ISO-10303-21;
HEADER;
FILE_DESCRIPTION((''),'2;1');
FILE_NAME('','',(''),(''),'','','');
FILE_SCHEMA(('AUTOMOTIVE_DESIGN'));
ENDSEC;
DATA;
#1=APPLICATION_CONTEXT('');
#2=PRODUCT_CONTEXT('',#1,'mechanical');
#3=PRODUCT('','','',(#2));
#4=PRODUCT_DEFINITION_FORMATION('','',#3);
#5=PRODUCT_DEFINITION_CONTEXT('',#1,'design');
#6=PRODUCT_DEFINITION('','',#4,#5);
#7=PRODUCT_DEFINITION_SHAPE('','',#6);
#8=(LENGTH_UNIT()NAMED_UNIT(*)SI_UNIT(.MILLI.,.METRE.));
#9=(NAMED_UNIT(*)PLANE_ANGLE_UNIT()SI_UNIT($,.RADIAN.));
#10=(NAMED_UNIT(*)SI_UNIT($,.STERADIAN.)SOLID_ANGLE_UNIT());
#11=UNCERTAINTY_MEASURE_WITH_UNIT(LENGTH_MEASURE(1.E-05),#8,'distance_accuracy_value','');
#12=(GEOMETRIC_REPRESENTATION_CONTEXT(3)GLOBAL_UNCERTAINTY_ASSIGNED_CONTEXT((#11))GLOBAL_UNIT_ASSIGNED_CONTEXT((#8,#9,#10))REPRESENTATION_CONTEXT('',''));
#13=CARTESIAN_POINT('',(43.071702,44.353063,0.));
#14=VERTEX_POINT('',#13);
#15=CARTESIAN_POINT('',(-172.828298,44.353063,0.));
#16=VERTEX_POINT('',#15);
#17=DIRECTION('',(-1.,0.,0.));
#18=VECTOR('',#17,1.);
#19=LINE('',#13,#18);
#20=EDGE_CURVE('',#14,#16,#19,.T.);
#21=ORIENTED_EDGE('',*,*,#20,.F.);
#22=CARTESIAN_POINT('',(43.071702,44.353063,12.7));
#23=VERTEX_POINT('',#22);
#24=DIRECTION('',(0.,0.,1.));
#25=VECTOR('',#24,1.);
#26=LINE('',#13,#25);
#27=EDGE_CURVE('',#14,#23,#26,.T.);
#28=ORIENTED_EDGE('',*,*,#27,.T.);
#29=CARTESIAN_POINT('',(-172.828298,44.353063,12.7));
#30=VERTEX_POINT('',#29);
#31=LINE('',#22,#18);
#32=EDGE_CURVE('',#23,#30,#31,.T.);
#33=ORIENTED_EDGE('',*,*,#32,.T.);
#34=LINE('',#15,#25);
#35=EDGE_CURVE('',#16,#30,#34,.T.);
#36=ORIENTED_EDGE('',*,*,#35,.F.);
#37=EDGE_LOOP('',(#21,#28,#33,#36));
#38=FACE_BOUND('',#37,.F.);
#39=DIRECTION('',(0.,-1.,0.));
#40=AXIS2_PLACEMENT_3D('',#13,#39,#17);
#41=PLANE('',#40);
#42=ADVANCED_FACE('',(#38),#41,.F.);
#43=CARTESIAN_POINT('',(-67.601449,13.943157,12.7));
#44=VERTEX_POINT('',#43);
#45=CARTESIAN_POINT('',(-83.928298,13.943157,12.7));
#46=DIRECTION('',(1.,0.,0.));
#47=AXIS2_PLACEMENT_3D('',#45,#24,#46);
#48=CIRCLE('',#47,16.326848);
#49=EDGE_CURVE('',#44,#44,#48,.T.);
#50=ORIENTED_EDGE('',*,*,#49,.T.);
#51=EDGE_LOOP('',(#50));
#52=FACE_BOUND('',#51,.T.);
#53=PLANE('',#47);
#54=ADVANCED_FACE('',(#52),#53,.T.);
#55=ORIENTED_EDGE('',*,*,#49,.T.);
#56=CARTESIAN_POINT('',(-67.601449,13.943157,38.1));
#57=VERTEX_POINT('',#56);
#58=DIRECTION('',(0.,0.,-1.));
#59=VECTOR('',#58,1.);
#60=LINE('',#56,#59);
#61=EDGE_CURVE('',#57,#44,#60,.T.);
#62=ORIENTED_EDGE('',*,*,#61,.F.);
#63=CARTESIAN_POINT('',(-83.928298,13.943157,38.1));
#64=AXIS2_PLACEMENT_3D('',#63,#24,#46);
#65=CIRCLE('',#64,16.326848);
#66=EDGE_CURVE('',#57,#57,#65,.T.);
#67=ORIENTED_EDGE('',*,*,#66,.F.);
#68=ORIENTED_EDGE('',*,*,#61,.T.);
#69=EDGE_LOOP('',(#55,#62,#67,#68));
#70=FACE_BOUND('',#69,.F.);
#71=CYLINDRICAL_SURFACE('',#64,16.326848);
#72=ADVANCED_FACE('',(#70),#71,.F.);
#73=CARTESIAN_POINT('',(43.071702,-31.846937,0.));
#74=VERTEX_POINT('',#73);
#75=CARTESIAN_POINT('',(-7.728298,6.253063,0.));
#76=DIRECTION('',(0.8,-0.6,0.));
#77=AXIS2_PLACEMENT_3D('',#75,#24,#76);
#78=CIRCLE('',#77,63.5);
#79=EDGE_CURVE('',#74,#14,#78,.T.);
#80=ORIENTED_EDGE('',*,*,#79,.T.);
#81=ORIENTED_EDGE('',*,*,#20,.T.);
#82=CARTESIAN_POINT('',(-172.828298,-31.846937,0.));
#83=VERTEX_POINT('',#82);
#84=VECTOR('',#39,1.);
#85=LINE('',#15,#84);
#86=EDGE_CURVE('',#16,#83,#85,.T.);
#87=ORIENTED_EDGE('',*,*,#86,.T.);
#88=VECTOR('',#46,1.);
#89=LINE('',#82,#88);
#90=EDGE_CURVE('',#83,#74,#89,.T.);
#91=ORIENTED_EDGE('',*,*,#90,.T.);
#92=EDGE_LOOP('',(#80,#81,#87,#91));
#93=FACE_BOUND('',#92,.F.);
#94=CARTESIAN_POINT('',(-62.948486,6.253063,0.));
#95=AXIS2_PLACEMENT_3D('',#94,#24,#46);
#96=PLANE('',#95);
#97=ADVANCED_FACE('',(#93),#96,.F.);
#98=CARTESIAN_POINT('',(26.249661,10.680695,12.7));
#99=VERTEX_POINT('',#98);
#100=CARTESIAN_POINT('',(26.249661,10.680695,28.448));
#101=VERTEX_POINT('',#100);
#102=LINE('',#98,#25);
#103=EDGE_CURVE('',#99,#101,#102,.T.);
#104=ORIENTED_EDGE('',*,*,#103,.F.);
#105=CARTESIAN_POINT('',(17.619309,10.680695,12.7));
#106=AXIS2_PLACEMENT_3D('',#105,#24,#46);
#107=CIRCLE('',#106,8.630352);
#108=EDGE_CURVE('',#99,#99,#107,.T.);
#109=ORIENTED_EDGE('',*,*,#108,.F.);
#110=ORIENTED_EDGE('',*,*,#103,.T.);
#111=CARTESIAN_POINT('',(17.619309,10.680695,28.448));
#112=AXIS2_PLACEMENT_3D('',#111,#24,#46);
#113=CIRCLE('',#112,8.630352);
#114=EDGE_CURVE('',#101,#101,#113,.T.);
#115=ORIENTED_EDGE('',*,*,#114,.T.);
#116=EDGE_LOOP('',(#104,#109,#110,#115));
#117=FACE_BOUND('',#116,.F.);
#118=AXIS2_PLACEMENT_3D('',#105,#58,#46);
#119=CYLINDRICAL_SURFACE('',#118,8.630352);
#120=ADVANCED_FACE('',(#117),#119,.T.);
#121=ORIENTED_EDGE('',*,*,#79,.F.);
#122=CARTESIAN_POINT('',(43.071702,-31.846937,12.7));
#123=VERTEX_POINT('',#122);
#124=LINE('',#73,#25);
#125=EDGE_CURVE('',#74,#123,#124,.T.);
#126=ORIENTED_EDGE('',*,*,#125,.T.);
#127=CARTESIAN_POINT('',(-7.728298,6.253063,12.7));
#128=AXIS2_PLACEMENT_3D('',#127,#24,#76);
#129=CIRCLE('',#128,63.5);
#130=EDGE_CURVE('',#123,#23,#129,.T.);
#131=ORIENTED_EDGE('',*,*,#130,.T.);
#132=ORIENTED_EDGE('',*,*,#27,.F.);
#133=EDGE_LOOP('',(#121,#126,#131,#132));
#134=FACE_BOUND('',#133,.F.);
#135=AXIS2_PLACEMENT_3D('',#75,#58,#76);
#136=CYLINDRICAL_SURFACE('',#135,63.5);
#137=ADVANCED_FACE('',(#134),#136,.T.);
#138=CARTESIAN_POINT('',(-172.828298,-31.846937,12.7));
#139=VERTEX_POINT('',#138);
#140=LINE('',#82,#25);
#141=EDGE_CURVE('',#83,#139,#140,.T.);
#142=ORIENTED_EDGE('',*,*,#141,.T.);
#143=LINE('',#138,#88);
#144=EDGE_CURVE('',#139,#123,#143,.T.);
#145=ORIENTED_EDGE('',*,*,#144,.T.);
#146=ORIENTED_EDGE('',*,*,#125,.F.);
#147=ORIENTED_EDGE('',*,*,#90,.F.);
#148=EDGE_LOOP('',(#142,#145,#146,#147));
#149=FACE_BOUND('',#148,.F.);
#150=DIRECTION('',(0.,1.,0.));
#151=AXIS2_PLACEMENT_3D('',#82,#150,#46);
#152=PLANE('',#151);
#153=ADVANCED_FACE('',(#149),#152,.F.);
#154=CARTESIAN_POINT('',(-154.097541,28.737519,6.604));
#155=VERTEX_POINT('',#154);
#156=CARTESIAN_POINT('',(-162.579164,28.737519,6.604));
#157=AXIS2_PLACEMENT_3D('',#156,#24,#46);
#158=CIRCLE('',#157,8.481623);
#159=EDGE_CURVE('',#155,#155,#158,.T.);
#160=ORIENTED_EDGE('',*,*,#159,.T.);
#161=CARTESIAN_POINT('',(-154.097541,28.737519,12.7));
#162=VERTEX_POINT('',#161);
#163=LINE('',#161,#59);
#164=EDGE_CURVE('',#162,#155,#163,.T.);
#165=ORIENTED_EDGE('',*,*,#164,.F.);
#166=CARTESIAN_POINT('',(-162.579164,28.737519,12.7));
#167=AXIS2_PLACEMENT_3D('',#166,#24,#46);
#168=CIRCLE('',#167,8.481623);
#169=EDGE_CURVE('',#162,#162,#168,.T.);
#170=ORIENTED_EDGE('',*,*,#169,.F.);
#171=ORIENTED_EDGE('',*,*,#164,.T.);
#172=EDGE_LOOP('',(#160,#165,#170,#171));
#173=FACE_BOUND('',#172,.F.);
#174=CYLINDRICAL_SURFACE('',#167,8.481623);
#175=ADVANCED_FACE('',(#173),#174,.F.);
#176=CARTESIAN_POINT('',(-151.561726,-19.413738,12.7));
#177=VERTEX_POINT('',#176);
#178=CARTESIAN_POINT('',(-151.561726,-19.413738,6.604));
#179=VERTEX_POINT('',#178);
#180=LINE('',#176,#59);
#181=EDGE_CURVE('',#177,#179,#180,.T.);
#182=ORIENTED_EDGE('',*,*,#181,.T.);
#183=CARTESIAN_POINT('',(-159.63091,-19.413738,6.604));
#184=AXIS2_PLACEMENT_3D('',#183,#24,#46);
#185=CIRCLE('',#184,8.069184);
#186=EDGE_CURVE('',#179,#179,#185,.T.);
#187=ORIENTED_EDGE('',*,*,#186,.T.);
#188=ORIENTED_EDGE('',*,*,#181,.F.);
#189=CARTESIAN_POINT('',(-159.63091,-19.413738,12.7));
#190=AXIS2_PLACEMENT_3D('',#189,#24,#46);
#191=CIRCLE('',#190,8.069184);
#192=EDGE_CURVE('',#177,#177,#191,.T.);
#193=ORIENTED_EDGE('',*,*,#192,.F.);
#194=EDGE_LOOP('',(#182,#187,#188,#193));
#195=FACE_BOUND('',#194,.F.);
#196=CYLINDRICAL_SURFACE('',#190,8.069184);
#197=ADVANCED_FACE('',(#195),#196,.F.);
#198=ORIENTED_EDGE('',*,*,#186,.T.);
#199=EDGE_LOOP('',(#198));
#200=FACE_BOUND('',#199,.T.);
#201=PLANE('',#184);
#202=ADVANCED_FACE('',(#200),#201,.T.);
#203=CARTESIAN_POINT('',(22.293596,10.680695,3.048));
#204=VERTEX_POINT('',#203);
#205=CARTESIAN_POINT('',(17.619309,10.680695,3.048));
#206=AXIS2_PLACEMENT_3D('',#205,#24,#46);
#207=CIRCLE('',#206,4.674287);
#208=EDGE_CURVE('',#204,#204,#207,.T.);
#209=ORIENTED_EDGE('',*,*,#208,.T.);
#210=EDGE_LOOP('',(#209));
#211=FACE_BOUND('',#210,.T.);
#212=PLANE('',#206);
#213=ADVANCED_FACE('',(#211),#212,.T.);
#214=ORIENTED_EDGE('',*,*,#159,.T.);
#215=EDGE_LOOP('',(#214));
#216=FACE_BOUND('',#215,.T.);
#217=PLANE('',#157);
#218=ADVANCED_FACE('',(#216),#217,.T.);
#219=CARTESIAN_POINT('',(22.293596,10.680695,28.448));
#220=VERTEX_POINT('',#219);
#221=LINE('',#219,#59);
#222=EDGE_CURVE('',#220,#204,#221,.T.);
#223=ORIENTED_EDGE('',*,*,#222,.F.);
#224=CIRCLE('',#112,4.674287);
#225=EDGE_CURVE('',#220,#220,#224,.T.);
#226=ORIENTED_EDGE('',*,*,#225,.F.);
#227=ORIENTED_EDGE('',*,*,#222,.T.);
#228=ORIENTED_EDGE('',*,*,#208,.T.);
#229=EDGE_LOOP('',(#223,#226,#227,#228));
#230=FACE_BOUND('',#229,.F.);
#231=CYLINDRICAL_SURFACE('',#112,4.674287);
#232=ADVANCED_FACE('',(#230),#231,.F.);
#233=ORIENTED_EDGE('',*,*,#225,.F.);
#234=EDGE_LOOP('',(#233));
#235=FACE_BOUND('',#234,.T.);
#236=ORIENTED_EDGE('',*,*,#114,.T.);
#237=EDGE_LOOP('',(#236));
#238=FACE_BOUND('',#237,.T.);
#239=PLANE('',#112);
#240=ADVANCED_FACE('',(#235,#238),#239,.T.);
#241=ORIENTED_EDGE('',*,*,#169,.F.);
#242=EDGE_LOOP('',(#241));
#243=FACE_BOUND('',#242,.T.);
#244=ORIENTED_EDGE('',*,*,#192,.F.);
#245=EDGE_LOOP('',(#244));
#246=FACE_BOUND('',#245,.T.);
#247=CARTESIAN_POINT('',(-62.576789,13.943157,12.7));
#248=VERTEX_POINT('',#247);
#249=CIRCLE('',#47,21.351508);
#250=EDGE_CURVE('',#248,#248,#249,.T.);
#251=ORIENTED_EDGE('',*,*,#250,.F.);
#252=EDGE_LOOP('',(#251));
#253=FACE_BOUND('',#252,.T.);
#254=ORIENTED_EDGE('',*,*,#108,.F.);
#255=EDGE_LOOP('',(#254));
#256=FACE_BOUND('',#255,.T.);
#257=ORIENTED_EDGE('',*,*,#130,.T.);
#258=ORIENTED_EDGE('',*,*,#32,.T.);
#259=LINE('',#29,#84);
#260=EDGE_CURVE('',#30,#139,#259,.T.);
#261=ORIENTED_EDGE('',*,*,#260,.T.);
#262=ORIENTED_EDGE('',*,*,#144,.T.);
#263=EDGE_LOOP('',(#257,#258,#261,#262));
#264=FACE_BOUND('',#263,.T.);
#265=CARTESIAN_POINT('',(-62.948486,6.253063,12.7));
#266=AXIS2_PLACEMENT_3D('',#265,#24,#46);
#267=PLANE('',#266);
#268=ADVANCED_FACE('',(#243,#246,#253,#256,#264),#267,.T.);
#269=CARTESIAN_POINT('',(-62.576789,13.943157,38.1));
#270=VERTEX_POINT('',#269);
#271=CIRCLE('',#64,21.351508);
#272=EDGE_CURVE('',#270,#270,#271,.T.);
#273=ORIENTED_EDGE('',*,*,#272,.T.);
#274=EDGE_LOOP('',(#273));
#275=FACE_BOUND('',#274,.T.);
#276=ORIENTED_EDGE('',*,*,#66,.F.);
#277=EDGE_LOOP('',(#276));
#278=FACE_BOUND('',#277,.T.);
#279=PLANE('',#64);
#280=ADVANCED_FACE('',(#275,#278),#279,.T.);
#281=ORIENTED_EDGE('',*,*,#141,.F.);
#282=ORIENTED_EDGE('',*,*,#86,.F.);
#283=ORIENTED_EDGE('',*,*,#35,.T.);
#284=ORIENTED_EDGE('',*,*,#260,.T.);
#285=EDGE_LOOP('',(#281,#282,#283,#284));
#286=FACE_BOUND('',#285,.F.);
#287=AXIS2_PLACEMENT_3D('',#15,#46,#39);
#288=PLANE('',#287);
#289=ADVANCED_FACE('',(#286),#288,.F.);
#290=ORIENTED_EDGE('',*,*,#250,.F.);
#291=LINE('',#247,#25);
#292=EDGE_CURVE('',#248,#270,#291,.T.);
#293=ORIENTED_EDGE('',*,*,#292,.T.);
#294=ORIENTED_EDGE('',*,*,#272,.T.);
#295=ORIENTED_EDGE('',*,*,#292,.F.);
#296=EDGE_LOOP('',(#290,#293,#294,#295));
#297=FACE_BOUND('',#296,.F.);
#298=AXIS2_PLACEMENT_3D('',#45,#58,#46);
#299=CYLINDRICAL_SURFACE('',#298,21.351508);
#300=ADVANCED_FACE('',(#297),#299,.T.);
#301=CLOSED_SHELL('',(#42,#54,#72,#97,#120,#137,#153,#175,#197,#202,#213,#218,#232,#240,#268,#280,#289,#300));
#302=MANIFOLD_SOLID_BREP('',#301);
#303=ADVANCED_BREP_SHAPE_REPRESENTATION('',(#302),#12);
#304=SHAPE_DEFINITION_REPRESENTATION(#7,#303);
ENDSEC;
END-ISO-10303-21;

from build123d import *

# Parameters (mm, degrees)
F1_DEPTH  = 12.7
F2_R      = 21.351508313
F5_DEPTH  = 25.4
F3_R      = 8.6303522865
F6_DEPTH  = 15.748
F7_R      = 16.3268483507
F8_DEPTH  = 25.4
F9_R      = 4.6742871789
F10_DEPTH = 25.4
F12_R     = 8.0691836116
F13_DEPTH = 6.096
F14_R     = 8.4816227384
F15_DEPTH = 6.096
F16_R     = 7.7449040589
F16_R_2   = 7.9980791945
F17_DEPTH = 9.906
F20_DEPTH = 76.2
F22_DEPTH = 54.61


with BuildPart() as f1:
    # F0 (on Top) → F1 (new body)
    with BuildSketch(Plane.XY):
        with BuildLine():
            Line((43.0717023765, 44.353062627), (-172.8282976235, 44.353062627))
            Line((-172.8282976235, 44.353062627), (-172.8282976235, -31.846937373))
            Line((-172.8282976235, -31.846937373), (43.0717023765, -31.846937373))
            ThreePointArc((43.0717023765, -31.846937373), (55.7717023765, 6.253062627), (43.0717023765, 44.353062627))
        make_face()
    extrude(amount=F1_DEPTH)

    # F2 (on face) → F5 (join)
    with BuildSketch(Plane.XY.offset(12.7)):
        with Locations((-83.9282976235, 13.9431571588)):
            Circle(F2_R)
    extrude(amount=F5_DEPTH)

    # F3 (on face) → F6 (join)
    with BuildSketch(Plane.XY.offset(12.7)):
        with Locations((17.6193086471, 10.6806947875)):
            Circle(F3_R)
    extrude(amount=F6_DEPTH)

    # F7 (on face) → F8 (cut)
    with BuildSketch(Plane.XY.offset(38.1)):
        with Locations((-83.9282976235, 13.9431571588)):
            Circle(F7_R)
    extrude(amount=-F8_DEPTH, mode=Mode.SUBTRACT)

    # F9 (on face) → F10 (cut)
    with BuildSketch(Plane.XY.offset(28.448)):
        with Locations((17.6193086471, 10.6806947875)):
            Circle(F9_R)
    extrude(amount=-F10_DEPTH, mode=Mode.SUBTRACT)

    # F12 (on face) → F13 (cut)
    with BuildSketch(Plane.XY.offset(12.7)):
        with Locations((-159.6309095621, -19.4137375802)):
            Circle(F12_R)
    extrude(amount=-F13_DEPTH, mode=Mode.SUBTRACT)

    # F14 (on face) → F15 (cut)
    with BuildSketch(Plane.XY.offset(12.7)):
        with Locations((-162.579163909, 28.7375189364)):
            Circle(F14_R)
    extrude(amount=-F15_DEPTH, mode=Mode.SUBTRACT)

    # F16 (on face) → F17 (join)
    with BuildSketch(Plane.XY.offset(12.7)):
        with Locations((-135.2781951427, 29.6167228371)):
            Circle(F16_R)
        with Locations((-135.2781951427, -19.9670530856)):
            Circle(F16_R_2)
    extrude(amount=-F17_DEPTH)

    # F19 (on face) → F20 (cut)
    with BuildSketch(Plane(origin=(-0.7380402899, 10.8379946946, 0), x_dir=(-0.9976893986, -0.0679401489, 0), z_dir=(-0.0679401489, 0.9976893986, 0))):
        Polygon((-10.0049076565, 30.4591804743), (62.7737756253, 41.8267212808), (62.7737756253, 54.864), (-10.0049076565, 54.864), align=None)
    extrude(amount=F20_DEPTH, mode=Mode.SUBTRACT)

    # F21 (on face) → F22 (cut)
    with BuildSketch(Plane(origin=(1.6560066854, 12.5212517744, 0), x_dir=(0.9913673033, -0.1311139582, 0), z_dir=(-0.1311139582, -0.9913673033, 0))):
        Polygon((7.6538164039, 54.864), (-65.4252028626, 54.864), (7.6538164039, 28.5761542618), align=None)
    extrude(amount=F22_DEPTH, mode=Mode.SUBTRACT)


solid = f1.part
